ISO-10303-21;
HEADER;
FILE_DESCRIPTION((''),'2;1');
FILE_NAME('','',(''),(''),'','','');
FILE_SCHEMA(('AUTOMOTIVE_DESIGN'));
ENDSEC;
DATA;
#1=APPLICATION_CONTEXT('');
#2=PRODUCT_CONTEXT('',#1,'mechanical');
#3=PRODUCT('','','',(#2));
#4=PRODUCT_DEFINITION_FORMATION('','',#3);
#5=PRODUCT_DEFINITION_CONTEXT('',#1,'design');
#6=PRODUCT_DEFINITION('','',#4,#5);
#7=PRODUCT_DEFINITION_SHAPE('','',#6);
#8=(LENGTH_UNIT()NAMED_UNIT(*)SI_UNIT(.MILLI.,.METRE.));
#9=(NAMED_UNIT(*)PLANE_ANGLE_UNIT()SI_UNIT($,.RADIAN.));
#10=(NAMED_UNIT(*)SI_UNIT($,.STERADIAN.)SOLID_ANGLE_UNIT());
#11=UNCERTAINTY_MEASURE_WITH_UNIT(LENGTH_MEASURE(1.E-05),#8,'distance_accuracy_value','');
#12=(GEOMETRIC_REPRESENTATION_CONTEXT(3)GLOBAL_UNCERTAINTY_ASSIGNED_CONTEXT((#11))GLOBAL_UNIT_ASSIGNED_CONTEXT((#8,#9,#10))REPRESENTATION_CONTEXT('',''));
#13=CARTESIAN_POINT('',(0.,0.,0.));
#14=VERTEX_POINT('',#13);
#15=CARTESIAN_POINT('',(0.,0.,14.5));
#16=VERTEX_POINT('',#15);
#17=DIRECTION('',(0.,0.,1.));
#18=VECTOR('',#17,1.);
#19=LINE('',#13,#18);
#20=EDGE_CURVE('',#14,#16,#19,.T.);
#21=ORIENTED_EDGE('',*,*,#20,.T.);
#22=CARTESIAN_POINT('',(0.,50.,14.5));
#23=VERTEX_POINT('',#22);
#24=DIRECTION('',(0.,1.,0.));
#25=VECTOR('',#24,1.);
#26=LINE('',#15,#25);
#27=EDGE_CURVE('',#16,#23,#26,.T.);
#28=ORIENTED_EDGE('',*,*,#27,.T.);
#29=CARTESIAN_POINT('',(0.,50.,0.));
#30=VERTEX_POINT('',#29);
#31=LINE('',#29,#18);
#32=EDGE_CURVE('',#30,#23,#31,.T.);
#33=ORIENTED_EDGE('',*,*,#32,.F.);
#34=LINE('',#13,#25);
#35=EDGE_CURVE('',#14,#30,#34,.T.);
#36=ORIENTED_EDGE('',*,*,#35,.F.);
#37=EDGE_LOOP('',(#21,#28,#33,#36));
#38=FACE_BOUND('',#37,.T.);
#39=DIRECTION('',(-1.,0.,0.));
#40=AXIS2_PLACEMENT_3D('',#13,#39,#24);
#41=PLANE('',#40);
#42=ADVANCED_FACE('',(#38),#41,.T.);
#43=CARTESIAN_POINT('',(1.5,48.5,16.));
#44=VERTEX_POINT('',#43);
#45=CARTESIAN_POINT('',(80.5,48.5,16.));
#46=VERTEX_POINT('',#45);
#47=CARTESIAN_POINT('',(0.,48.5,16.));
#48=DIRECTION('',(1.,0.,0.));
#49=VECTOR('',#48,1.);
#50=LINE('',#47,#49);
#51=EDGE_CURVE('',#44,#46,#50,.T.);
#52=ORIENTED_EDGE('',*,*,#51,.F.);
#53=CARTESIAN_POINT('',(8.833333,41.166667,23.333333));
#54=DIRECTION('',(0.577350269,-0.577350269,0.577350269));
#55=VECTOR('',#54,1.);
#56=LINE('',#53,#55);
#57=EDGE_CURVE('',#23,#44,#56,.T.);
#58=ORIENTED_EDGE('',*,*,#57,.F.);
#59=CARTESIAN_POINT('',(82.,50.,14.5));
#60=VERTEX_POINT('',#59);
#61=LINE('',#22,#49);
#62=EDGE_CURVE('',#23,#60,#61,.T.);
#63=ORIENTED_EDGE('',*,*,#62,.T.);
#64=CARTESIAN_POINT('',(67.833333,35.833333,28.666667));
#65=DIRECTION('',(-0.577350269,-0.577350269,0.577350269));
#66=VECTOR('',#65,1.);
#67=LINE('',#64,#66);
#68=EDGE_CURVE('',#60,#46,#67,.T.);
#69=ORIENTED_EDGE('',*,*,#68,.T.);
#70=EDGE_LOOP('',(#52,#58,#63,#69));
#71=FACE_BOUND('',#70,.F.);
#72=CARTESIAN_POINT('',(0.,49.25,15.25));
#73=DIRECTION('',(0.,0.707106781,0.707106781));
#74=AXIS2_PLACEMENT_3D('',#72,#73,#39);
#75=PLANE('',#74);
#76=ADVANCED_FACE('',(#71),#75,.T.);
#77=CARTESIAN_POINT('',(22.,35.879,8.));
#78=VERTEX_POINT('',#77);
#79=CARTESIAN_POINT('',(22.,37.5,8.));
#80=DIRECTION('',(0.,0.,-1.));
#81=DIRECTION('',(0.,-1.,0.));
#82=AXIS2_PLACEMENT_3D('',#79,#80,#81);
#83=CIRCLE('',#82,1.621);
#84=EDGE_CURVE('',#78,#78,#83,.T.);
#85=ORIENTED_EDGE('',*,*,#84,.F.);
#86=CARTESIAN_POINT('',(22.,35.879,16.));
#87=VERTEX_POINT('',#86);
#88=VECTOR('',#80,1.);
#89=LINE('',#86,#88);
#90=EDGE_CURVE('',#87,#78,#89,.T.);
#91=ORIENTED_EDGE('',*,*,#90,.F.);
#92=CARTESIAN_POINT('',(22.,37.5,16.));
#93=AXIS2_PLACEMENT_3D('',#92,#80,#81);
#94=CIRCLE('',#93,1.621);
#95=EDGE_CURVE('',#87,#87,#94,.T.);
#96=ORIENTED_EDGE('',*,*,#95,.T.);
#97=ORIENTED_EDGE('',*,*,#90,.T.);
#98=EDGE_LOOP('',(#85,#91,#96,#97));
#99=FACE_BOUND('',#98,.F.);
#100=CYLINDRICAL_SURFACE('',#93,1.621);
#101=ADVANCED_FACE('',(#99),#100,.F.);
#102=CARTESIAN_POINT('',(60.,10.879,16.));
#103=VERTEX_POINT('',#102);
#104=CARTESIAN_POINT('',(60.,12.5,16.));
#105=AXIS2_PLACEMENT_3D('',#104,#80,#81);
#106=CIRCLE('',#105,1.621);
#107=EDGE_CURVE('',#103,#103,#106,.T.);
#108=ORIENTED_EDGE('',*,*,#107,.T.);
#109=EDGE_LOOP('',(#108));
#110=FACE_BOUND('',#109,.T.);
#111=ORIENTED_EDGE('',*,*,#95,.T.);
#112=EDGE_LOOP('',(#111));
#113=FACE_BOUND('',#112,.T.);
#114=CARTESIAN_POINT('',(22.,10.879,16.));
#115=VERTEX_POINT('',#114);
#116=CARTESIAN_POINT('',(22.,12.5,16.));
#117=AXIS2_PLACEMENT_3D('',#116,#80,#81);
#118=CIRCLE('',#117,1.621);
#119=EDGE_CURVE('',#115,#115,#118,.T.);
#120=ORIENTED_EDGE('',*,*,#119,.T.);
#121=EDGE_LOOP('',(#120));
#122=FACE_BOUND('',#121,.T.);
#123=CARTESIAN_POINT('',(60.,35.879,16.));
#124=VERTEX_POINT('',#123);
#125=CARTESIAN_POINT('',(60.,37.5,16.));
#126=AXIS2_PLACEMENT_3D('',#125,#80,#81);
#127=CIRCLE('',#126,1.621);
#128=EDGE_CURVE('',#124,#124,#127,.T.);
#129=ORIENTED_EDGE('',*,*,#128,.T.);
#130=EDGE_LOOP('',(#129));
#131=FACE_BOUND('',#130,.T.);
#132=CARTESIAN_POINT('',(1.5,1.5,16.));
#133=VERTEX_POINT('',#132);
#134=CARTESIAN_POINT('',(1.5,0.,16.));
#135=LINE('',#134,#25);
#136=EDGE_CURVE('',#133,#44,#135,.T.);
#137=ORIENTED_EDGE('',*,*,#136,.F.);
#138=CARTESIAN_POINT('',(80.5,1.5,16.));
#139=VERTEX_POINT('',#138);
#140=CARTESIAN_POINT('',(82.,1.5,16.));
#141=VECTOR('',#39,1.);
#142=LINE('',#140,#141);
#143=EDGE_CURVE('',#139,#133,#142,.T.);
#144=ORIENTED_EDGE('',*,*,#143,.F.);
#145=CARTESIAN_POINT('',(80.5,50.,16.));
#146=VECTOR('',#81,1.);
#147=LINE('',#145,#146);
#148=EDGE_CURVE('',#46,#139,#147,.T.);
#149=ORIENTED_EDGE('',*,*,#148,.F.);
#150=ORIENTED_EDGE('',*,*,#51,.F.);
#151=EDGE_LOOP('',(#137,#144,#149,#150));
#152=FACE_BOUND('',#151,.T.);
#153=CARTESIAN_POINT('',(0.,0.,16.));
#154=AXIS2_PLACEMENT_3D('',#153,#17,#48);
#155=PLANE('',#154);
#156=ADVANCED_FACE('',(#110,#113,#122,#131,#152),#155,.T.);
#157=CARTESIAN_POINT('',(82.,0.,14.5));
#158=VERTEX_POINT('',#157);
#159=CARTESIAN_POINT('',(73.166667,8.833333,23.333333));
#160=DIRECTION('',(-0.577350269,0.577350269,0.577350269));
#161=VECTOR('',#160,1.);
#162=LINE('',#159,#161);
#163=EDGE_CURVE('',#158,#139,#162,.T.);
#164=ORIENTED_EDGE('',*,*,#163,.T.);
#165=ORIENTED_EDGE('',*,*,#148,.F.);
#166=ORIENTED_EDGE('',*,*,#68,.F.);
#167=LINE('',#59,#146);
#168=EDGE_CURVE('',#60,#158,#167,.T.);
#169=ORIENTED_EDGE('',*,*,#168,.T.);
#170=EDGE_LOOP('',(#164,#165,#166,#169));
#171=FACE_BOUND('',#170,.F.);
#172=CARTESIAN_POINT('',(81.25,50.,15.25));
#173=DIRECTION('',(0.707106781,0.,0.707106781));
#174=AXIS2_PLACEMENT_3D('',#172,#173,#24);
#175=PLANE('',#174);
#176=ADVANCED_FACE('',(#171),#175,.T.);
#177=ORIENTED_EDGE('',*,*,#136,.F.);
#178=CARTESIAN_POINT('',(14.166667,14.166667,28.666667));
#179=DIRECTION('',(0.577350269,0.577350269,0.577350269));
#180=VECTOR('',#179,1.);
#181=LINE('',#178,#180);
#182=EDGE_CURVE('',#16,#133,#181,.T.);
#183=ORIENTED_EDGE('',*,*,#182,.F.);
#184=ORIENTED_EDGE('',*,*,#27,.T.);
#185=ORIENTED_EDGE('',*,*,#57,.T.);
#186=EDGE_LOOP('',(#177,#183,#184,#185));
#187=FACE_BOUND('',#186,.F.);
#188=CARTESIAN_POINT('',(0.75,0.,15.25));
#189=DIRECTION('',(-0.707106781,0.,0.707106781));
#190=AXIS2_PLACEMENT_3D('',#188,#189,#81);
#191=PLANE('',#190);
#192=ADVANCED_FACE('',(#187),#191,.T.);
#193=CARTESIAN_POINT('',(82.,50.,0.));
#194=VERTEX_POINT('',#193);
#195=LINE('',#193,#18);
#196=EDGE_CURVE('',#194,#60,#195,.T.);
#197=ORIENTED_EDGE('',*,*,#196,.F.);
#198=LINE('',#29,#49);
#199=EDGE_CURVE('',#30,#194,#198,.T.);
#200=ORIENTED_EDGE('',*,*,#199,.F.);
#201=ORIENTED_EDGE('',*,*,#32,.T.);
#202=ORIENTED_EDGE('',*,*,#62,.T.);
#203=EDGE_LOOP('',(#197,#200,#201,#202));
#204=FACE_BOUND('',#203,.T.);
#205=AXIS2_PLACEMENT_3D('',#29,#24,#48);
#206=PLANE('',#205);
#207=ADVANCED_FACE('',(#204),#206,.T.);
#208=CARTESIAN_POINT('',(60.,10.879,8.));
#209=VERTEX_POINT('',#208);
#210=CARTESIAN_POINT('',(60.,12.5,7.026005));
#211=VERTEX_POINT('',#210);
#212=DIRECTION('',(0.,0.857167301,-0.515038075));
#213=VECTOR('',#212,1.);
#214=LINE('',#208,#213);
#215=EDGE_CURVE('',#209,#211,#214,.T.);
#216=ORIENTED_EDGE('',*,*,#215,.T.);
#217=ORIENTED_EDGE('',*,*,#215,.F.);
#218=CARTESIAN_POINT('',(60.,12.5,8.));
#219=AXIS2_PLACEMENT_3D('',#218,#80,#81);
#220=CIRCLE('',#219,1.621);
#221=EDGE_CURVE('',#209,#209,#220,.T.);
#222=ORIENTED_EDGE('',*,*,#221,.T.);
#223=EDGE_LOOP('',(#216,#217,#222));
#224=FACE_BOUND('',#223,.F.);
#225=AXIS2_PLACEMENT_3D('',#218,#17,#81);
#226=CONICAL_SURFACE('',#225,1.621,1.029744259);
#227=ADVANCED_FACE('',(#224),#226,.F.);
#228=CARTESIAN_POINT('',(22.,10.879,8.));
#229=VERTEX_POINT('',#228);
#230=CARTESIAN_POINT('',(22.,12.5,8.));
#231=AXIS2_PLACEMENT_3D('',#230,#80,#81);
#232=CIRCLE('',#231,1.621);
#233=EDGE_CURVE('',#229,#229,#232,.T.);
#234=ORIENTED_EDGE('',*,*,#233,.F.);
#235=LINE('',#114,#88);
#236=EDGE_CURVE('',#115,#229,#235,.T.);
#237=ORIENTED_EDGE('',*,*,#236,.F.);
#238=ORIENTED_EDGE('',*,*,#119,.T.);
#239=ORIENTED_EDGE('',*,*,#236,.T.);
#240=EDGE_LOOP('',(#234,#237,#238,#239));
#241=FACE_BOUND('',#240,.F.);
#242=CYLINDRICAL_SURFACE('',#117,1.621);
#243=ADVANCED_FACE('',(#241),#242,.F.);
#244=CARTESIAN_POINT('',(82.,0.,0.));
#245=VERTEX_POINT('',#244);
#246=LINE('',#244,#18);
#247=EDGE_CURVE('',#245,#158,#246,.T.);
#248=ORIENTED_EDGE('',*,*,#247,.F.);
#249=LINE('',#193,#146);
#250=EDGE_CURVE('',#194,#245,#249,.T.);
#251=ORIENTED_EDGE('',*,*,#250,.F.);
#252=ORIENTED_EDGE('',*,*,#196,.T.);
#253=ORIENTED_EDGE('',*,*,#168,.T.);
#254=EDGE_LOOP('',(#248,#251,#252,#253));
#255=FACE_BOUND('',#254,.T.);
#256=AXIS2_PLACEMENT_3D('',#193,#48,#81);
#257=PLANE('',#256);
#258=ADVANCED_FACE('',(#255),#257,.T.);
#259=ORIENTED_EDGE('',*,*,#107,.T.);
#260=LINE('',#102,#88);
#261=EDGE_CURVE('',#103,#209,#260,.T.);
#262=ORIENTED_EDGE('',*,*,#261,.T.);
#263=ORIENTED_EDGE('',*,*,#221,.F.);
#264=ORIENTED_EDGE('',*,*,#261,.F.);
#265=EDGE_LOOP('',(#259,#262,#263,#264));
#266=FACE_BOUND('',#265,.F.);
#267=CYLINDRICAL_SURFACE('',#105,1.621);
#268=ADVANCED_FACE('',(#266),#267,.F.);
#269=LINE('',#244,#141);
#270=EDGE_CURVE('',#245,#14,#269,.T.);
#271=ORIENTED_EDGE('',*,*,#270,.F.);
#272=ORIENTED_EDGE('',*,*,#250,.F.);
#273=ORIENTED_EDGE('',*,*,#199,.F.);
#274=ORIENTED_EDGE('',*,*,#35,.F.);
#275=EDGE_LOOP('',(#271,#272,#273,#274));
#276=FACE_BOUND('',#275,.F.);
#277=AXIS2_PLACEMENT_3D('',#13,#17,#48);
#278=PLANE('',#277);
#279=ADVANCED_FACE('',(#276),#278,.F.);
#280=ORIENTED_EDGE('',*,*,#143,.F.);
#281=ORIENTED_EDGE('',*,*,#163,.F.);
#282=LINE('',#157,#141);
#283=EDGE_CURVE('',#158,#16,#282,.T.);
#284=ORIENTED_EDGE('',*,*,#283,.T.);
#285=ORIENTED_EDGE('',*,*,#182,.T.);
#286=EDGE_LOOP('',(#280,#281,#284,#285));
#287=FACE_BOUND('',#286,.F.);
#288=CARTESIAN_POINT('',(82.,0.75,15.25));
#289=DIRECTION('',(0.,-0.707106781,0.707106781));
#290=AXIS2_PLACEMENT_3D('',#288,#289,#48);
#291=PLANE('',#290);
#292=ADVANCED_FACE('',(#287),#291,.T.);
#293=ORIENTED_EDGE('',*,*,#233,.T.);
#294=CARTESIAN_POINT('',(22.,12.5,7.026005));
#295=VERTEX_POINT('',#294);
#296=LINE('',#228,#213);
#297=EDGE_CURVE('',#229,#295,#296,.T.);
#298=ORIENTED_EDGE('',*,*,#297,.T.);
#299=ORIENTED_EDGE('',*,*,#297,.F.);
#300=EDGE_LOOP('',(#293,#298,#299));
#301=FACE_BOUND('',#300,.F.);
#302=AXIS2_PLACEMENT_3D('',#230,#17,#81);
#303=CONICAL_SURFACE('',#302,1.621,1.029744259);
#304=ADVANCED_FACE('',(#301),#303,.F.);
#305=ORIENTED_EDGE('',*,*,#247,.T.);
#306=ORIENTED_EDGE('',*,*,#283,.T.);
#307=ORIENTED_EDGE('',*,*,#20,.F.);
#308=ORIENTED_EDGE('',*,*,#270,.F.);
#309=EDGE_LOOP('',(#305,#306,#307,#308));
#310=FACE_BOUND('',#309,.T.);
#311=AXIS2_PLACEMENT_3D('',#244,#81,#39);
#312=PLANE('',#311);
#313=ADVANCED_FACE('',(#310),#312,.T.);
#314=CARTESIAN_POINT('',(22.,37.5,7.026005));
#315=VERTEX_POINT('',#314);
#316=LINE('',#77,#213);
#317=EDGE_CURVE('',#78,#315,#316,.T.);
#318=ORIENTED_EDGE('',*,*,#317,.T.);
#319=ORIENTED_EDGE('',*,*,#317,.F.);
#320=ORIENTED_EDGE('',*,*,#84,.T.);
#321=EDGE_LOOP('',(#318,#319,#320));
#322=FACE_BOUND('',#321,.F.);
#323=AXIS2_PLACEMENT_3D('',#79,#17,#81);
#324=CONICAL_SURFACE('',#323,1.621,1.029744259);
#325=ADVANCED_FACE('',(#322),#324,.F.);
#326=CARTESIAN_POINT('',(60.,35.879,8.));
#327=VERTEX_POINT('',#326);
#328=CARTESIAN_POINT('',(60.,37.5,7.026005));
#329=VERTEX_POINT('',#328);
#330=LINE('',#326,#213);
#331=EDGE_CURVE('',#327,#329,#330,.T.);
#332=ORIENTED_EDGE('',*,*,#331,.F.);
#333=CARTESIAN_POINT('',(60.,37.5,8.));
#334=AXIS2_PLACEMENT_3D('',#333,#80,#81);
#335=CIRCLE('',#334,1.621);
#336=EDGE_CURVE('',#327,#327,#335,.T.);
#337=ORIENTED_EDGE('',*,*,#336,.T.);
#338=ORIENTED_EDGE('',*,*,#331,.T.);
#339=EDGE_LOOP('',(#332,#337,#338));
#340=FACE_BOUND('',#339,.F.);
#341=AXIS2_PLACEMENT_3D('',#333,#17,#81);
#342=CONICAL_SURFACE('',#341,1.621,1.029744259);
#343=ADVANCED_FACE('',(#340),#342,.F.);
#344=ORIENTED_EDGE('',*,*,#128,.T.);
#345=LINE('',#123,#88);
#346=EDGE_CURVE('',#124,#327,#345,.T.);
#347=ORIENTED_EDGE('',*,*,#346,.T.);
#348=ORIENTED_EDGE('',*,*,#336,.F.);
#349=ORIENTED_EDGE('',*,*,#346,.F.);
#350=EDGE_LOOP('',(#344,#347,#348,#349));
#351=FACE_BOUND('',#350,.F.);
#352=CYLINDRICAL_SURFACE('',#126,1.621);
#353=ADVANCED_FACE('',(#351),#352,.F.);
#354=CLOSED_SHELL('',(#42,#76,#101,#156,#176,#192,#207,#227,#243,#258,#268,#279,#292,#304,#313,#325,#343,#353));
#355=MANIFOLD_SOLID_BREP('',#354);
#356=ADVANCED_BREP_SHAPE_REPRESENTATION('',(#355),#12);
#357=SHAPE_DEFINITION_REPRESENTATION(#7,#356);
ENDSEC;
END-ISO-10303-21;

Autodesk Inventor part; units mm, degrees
ref_plane "YZ Plane" through (0, 0, 0) normal (1, 0, 0) x (0, 1, 0)
ref_plane "XZ Plane" through (0, 0, 0) normal (0, 1, 0) x (-1, 0, 0)
ref_plane "XY Plane" through (0, 0, 0) normal (0, 0, 1) x (1, 0, 0)
sketch "Skizze1" plane through (0, 0, 0) normal (0, 0, 1) x (1, 0, 0)
  line L0 (0, 50) -> (82, 50)
  line L1 (82, 50) -> (82, 0)
  line L2 (82, 0) -> (0, 0)
  line L3 (0, 0) -> (0, 50)
  dimension "d0" = 50
  dimension "d1" = 82
extrude "Extrusion1" add sketch "Skizze1" along normal blind 16
chamfer "Fasen1" distance 1.5 angle 45 4 edges at (41, 50, 16) (82, 25, 16) (41, 0, 16) (0, 25, 16)
sketch "Skizze2" plane through (0, 0, 16) normal (0, 0, 1) x (1, 0, 0)
  line L0 (82, 50) -> (0, 50) projected
  line L1 (41, 50) -> (41, 0) construction
  line L2 (0, 0) -> (82, 0) projected
  line L3 (0, 50) -> (0, 0) projected
  line L4 (0, 25) -> (82.1323, 25) construction
  point P0 (60, 37.5)
  point P1 (60, 12.5)
  point P2 (22, 37.5)
  point P3 (22, 12.5)
  dimension "d7" = 25
  dimension "d8" = 38
hole "Bohrung1" at (60, 37.5, 16) at (60, 12.5, 16) at (22, 37.5, 16) at (22, 12.5, 16) direction (0, 0, -1) diameter 3.242 depth 8 tip angle 118 thread size "M4x0.7" class "6H" standard "ISO Metric profile"
properties part number "Grundplatte" material "Stahl, galvanisiert"
